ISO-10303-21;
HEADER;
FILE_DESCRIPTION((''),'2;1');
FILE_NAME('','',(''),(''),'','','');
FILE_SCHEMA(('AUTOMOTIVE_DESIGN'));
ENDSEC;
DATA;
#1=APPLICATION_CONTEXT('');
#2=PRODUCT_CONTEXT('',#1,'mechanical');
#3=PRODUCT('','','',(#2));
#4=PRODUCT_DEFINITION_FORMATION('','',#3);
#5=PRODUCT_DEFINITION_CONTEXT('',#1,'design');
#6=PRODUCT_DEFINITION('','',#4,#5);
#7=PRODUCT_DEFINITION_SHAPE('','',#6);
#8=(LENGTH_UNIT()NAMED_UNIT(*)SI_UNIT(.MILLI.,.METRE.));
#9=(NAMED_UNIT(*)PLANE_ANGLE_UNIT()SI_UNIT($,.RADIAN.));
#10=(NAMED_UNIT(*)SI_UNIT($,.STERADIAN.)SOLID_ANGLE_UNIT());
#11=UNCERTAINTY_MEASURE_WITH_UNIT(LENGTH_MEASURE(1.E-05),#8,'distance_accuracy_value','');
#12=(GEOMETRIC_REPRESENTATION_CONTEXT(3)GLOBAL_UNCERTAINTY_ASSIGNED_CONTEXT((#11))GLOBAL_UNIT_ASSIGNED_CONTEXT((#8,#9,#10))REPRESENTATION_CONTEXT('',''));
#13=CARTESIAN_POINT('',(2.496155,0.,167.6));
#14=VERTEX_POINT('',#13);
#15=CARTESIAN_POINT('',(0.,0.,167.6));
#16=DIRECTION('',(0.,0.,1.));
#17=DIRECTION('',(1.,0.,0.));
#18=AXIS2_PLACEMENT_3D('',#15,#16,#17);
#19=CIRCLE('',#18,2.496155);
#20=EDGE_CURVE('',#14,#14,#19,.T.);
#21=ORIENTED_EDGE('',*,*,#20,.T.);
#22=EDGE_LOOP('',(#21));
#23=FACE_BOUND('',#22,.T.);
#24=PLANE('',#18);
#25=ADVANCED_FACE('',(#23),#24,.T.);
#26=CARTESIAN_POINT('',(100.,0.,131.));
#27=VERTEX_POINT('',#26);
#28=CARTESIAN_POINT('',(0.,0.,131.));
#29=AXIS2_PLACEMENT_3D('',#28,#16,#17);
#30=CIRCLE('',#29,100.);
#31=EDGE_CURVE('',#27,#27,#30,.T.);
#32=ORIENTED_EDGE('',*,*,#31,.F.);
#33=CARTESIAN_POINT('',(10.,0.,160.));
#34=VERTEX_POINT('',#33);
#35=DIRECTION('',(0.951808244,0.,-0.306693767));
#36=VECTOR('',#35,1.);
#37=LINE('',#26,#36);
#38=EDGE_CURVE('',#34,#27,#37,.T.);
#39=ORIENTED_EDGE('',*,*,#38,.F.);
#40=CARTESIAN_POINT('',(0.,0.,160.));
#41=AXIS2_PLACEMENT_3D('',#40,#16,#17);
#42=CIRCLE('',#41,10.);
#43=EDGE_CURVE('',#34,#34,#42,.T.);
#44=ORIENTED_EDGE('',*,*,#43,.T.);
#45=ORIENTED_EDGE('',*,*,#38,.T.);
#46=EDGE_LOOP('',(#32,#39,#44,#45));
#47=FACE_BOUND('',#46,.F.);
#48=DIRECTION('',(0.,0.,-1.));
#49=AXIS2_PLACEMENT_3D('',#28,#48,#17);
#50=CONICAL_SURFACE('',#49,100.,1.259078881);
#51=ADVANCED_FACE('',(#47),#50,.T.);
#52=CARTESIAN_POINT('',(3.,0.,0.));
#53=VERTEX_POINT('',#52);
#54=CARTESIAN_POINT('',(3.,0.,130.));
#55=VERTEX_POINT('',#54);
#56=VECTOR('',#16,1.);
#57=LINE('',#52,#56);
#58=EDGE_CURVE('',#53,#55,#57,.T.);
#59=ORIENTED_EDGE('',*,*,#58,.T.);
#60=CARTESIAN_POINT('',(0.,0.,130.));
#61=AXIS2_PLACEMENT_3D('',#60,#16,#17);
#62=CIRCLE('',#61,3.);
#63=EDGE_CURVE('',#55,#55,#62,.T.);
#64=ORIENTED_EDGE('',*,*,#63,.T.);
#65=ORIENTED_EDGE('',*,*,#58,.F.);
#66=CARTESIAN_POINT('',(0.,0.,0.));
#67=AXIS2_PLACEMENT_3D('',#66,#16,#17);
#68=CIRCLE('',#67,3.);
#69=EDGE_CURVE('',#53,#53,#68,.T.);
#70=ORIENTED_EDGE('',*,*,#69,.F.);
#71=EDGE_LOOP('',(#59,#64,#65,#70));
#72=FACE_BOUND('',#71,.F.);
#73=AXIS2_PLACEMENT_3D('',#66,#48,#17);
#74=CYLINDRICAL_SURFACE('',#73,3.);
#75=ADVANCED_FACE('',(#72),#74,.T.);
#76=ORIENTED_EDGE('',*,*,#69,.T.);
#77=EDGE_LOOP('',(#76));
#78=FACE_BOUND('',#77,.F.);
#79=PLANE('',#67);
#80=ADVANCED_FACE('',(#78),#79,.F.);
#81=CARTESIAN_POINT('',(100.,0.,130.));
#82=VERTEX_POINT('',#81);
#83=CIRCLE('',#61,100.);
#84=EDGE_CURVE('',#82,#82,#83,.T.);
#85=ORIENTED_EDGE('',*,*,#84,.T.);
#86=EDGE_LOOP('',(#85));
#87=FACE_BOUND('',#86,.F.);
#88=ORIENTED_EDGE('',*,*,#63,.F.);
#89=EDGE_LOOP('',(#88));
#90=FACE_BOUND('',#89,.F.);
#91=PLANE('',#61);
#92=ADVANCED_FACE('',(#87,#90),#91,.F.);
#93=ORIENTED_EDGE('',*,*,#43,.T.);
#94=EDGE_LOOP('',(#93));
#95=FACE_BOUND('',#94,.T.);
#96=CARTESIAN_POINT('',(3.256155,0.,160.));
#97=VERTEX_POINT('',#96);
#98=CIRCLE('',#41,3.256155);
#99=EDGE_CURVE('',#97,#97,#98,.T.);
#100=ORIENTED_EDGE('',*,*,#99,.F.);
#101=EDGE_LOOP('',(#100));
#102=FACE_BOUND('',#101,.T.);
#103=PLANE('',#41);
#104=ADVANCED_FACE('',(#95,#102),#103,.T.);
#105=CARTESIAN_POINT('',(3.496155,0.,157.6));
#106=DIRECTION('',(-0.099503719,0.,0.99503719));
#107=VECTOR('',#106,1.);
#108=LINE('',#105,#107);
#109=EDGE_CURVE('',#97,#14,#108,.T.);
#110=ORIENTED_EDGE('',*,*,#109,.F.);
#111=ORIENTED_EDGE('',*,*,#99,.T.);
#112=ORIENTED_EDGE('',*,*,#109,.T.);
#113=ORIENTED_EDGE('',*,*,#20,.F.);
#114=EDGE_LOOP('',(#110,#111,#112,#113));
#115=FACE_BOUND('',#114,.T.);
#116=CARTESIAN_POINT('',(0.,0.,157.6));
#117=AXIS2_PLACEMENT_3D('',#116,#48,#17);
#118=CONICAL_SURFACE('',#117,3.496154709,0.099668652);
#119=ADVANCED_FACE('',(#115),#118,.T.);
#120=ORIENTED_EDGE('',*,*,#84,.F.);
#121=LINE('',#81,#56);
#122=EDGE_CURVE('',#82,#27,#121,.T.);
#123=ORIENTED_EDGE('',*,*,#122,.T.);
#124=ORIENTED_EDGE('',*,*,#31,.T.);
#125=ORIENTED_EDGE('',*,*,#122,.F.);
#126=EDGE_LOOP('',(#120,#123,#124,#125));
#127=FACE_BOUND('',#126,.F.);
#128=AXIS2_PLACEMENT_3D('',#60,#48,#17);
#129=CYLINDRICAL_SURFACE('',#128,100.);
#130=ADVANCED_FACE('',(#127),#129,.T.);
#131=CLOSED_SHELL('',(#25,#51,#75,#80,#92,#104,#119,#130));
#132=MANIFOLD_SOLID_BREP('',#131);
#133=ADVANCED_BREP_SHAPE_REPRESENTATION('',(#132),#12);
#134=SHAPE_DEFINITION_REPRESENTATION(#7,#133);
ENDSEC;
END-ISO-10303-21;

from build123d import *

# Parameters (mm, degrees)
F0_R     = 3
F1_DEPTH = 130
F2_R     = 100
F2_R_2   = 3
F3_DEPTH = 30
F4_SIZE2 = 29
F4_SIZE  = 90
F5_R     = 3.4961547094
F6_DEPTH = 7.6


# Not quite as in the source:
# - a fillet or chamfer that OpenCascade refuses, or shapes differently, is made with other operations: its cross-section is extruded or revolved along the edge and cut away or added


with BuildPart() as f1:
    # F0 (on Top) → F1 (new body)
    with BuildSketch(Plane.XY):
        Circle(F0_R)
    extrude(amount=F1_DEPTH)

    # F2 (on face) → F3 (join)
    with BuildSketch(Plane.XY.offset(130)):
        Circle(F2_R)
        Circle(F2_R_2, mode=Mode.SUBTRACT)
        Circle(F2_R_2)
    extrude(amount=F3_DEPTH)

    # F4
    f4_edges = [f1.edges().sort_by_distance(p)[0] for p in [
        (-100, 0, 160),
    ]]
    f4_side = f1.faces().sort_by_distance((0, 0, 160))[0]
    chamfer(f4_edges, length=F4_SIZE, length2=F4_SIZE2, reference=f4_side)

    # F5 (on face) → F6 (join)
    with BuildSketch(Plane.XY.offset(160)):
        Circle(F5_R)
    extrude(amount=F6_DEPTH)

    # F7: chamfer of 1 x 10 on 1 edges, made by hand


with BuildPart() as f7_tool2:
    # F7_s3 → F7_t4 (revolve)
    with BuildSketch(Plane.XZ):
        Polygon((3.4961547094, 157.6), (2.4961547094, 167.6), (3.4961547094, 167.6), align=None)
    revolve(axis=Axis((0, 0, 167.6), (0, 0, 1)))

    split(bisect_by=Plane.XY.offset(160), keep=Keep.TOP)


with BuildPart() as f1_1:
    add(f1.part)

    # F7_t1: cut F7_tool2
    add(f7_tool2.part, mode=Mode.SUBTRACT)


solid = f1_1.part
